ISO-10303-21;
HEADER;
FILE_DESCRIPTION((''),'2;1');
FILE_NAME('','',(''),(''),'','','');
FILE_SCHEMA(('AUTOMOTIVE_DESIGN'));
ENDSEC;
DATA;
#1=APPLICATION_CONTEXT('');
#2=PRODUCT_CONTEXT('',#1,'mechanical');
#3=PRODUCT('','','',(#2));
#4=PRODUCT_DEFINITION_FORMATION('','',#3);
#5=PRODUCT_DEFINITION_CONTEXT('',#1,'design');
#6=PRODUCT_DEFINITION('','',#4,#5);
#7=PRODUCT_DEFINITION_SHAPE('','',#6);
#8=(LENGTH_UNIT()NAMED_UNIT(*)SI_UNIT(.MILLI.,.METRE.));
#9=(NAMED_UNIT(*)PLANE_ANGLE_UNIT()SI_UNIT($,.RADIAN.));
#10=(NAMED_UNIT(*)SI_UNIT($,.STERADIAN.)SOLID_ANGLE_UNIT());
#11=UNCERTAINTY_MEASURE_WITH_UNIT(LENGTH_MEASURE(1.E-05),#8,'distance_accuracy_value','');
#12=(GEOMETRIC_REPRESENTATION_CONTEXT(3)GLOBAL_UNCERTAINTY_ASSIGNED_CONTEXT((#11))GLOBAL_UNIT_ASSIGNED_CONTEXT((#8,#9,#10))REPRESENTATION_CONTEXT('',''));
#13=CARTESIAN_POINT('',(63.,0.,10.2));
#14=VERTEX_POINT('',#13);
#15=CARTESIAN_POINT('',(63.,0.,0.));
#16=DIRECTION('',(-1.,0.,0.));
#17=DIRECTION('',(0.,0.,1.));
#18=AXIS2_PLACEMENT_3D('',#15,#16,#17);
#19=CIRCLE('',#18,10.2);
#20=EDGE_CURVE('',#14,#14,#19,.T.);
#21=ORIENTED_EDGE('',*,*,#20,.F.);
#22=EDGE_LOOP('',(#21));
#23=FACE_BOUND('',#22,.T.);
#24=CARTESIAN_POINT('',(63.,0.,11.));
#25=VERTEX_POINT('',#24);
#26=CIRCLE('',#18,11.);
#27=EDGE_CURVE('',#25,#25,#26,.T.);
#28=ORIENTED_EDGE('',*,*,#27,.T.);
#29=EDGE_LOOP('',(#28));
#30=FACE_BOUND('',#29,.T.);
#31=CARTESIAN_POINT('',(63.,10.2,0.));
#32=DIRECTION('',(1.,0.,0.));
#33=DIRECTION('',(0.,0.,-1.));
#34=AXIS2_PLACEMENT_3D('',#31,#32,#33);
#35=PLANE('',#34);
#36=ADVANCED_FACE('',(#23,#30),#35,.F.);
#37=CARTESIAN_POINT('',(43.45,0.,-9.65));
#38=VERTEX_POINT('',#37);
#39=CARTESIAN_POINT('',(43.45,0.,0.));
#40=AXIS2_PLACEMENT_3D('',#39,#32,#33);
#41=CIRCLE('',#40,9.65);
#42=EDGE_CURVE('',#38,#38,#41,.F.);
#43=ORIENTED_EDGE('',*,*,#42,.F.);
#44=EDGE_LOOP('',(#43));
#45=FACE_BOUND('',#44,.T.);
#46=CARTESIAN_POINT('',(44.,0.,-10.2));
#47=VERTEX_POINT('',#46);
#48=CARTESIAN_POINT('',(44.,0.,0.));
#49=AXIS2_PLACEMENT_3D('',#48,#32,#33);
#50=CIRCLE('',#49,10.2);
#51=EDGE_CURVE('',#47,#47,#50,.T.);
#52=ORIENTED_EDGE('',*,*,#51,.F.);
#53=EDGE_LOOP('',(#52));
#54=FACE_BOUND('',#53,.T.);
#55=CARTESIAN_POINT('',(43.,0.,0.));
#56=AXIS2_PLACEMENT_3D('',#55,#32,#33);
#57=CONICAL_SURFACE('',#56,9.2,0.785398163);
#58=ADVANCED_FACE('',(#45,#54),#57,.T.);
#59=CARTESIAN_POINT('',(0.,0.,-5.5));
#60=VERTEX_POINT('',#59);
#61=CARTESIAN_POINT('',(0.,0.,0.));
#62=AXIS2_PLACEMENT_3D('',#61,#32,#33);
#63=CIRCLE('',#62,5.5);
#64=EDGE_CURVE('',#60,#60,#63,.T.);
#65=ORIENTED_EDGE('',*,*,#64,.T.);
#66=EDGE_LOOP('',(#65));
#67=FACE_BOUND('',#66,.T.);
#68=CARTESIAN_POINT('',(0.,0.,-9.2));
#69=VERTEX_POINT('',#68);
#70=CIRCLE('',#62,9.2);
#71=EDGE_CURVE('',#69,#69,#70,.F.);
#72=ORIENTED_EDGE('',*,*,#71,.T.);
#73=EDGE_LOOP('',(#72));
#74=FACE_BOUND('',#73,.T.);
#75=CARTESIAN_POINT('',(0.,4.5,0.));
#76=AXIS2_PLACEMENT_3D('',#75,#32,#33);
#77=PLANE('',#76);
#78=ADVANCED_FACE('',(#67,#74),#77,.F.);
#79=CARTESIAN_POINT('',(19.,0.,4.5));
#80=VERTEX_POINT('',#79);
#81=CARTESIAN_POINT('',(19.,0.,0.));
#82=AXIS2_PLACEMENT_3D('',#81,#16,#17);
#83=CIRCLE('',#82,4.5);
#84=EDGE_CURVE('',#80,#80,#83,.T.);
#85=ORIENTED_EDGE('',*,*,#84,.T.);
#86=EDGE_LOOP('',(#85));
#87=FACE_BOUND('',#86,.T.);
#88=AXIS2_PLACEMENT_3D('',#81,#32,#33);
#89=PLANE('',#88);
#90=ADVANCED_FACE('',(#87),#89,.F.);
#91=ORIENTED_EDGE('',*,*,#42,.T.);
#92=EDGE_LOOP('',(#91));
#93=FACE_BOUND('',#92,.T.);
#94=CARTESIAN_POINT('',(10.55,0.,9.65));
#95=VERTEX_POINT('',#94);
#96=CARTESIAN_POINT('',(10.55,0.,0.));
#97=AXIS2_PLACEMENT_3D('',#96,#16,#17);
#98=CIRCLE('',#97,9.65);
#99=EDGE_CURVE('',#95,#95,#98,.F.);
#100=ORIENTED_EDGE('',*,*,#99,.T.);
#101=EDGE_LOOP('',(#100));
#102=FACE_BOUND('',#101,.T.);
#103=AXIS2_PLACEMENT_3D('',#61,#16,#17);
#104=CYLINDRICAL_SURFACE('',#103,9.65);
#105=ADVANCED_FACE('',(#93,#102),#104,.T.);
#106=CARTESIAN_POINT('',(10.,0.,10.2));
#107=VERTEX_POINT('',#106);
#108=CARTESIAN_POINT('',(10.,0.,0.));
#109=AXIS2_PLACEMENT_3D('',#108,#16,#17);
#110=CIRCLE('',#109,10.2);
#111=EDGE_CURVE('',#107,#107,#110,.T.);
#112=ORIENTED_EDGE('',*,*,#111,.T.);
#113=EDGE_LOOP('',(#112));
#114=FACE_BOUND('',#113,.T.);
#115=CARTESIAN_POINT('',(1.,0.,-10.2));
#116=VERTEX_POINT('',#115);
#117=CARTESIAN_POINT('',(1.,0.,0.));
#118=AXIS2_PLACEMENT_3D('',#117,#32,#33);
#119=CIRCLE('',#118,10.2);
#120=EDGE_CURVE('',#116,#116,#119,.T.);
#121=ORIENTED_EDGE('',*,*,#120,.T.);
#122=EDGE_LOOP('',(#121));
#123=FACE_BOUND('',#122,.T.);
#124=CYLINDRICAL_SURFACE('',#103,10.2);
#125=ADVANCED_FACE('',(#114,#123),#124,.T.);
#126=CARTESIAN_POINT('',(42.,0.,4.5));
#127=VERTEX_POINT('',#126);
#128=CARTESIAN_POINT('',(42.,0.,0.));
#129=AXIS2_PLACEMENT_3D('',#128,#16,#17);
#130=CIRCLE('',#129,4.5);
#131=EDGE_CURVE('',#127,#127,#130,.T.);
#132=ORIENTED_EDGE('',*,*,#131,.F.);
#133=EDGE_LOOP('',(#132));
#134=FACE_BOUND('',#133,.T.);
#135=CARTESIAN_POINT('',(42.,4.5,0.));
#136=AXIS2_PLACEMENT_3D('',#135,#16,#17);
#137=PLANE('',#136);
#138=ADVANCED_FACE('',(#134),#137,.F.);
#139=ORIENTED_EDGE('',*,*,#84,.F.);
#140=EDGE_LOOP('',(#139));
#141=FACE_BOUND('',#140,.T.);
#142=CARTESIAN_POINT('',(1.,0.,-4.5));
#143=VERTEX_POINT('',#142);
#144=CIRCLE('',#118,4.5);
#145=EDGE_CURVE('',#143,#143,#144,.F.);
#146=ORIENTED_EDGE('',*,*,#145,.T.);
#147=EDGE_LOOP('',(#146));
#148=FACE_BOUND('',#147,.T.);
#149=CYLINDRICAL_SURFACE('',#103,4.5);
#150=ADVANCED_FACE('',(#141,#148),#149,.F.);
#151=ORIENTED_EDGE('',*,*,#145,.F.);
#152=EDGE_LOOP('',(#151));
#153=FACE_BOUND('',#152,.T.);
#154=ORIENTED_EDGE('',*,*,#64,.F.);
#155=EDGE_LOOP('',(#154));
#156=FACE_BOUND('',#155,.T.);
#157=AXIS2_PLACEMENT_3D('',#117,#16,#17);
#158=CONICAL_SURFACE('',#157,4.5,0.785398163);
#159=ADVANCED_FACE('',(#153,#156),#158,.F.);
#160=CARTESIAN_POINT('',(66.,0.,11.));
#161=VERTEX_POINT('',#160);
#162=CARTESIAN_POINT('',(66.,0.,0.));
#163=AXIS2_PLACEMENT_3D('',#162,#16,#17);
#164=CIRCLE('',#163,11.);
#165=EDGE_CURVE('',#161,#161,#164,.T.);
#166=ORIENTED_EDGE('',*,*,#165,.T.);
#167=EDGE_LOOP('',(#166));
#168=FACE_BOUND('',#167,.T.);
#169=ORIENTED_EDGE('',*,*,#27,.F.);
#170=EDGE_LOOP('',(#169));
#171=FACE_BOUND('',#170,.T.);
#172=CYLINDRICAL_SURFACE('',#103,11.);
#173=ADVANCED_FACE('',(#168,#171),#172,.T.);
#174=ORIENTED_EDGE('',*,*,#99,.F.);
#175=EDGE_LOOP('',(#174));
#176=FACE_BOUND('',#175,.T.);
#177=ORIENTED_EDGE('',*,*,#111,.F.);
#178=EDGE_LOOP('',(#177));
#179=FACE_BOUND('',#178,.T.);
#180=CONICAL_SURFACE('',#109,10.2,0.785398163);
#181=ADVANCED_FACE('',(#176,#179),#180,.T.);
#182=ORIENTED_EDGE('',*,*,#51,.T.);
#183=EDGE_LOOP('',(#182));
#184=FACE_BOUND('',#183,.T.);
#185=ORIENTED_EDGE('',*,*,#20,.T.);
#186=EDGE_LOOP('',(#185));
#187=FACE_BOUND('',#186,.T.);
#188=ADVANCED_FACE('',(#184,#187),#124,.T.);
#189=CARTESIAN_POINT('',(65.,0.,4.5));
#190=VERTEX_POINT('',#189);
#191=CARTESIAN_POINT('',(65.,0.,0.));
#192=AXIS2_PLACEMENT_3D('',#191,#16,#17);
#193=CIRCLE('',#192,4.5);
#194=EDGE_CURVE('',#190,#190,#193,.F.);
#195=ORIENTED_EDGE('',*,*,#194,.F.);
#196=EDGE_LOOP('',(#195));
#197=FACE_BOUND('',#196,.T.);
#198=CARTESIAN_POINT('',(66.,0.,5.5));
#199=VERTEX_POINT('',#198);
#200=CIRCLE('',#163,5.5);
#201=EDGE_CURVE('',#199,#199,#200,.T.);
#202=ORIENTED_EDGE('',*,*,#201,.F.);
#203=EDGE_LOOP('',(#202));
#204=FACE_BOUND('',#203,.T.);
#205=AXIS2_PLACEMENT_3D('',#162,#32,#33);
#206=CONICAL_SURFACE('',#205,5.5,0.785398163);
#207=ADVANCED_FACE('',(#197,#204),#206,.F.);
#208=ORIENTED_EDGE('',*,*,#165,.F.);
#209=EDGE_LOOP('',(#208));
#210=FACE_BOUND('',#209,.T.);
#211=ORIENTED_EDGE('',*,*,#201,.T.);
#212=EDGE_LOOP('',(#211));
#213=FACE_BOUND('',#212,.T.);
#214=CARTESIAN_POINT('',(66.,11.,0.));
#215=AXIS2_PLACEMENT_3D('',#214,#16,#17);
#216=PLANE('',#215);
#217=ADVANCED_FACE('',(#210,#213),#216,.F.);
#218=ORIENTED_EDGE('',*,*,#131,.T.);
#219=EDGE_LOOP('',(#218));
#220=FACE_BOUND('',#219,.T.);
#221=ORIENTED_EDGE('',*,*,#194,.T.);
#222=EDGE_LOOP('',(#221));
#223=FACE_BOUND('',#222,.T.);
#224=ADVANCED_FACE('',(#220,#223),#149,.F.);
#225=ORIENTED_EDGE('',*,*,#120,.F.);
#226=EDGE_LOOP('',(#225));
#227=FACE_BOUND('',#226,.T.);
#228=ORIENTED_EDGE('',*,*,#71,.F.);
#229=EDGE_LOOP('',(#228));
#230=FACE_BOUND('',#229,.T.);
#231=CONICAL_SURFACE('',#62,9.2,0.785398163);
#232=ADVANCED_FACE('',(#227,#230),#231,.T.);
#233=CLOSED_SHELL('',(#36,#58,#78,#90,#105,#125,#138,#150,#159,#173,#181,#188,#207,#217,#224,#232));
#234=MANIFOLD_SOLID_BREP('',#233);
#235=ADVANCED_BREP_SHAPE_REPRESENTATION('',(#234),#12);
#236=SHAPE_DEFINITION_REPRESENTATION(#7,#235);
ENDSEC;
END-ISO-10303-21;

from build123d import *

# Parameters (mm, degrees)
SFAZOWANIE1_SIZE = 1
SFAZOWANIE2_SIZE = 1
SFAZOWANIE3_SIZE = 1


with BuildPart() as part:
    # Szkic1 → Obrót1 (revolve)
    with BuildSketch(Plane.XY, mode=Mode.PRIVATE) as obr_t1_sk:
        Polygon((0, 4.5), (0, 10.2), (11, 10.2), (11, 9.65), (43, 9.65), (43, 10.2), (63, 10.2), (63, 11), (66, 11), (66, 4.5), (42, 4.5), (42, 0), (19, 0), (19, 4.5), align=None)
    revolve(obr_t1_sk.sketch.rotate(Axis((0, 0, 0), (1, 0, 0)), 90), axis=Axis((0, 0, 0), (1, 0, 0)))

    # Sfazowanie1
    sfazowanie1_edges = [part.edges().sort_by_distance(p)[0] for p in [
        (0, 0, -10.2),
    ]]
    chamfer(sfazowanie1_edges, length=SFAZOWANIE1_SIZE)

    # Sfazowanie2
    # the kernel refuses this chamfer: 1 mm, written as the material it takes off along each edge
    with BuildSketch(Plane(origin=(11, 0, 0), x_dir=(0, 0, 1), z_dir=(0, 1, 0))) as sfazowanie2_piece_1_section:
        Polygon((10.2, -SFAZOWANIE2_SIZE), (10.2 - SFAZOWANIE2_SIZE, 0), (10.2, 0), align=None)
    sfazowanie2_piece_1 = revolve(axis=Axis((11, 0, 0), (1, 0, 0)), mode=Mode.PRIVATE)
    sfazowanie2_piece_1 = sfazowanie2_piece_1 - Plane(origin=(10.282118865, 0, 0), x_dir=(0, 0, 1), z_dir=(1, 0, 0)) * Cylinder(9.65, 41, mode=Mode.PRIVATE)
    add(sfazowanie2_piece_1, mode=Mode.SUBTRACT)
    with BuildSketch(Plane(origin=(43, 0, 0), x_dir=(0, 0, 1), z_dir=(0, 1, 0))) as sfazowanie2_piece_2_section:
        Polygon((10.2 - SFAZOWANIE2_SIZE, 0), (10.2, SFAZOWANIE2_SIZE), (10.2, 0), align=None)
    sfazowanie2_piece_2 = revolve(axis=Axis((43, 0, 0), (1, 0, 0)), mode=Mode.PRIVATE)
    sfazowanie2_piece_2 = sfazowanie2_piece_2 - Plane(origin=(43.717881135, 0, 0), x_dir=(0, 0, 1), z_dir=(1, 0, 0)) * Cylinder(9.65, 41, mode=Mode.PRIVATE)
    add(sfazowanie2_piece_2, mode=Mode.SUBTRACT)

    # Sfazowanie3
    sfazowanie3_edges = [part.edges().sort_by_distance(p)[0] for p in [
        (0, 0, -4.5),
        (66, 0, -4.5),
    ]]
    chamfer(sfazowanie3_edges, length=SFAZOWANIE3_SIZE)


solid = part.part
